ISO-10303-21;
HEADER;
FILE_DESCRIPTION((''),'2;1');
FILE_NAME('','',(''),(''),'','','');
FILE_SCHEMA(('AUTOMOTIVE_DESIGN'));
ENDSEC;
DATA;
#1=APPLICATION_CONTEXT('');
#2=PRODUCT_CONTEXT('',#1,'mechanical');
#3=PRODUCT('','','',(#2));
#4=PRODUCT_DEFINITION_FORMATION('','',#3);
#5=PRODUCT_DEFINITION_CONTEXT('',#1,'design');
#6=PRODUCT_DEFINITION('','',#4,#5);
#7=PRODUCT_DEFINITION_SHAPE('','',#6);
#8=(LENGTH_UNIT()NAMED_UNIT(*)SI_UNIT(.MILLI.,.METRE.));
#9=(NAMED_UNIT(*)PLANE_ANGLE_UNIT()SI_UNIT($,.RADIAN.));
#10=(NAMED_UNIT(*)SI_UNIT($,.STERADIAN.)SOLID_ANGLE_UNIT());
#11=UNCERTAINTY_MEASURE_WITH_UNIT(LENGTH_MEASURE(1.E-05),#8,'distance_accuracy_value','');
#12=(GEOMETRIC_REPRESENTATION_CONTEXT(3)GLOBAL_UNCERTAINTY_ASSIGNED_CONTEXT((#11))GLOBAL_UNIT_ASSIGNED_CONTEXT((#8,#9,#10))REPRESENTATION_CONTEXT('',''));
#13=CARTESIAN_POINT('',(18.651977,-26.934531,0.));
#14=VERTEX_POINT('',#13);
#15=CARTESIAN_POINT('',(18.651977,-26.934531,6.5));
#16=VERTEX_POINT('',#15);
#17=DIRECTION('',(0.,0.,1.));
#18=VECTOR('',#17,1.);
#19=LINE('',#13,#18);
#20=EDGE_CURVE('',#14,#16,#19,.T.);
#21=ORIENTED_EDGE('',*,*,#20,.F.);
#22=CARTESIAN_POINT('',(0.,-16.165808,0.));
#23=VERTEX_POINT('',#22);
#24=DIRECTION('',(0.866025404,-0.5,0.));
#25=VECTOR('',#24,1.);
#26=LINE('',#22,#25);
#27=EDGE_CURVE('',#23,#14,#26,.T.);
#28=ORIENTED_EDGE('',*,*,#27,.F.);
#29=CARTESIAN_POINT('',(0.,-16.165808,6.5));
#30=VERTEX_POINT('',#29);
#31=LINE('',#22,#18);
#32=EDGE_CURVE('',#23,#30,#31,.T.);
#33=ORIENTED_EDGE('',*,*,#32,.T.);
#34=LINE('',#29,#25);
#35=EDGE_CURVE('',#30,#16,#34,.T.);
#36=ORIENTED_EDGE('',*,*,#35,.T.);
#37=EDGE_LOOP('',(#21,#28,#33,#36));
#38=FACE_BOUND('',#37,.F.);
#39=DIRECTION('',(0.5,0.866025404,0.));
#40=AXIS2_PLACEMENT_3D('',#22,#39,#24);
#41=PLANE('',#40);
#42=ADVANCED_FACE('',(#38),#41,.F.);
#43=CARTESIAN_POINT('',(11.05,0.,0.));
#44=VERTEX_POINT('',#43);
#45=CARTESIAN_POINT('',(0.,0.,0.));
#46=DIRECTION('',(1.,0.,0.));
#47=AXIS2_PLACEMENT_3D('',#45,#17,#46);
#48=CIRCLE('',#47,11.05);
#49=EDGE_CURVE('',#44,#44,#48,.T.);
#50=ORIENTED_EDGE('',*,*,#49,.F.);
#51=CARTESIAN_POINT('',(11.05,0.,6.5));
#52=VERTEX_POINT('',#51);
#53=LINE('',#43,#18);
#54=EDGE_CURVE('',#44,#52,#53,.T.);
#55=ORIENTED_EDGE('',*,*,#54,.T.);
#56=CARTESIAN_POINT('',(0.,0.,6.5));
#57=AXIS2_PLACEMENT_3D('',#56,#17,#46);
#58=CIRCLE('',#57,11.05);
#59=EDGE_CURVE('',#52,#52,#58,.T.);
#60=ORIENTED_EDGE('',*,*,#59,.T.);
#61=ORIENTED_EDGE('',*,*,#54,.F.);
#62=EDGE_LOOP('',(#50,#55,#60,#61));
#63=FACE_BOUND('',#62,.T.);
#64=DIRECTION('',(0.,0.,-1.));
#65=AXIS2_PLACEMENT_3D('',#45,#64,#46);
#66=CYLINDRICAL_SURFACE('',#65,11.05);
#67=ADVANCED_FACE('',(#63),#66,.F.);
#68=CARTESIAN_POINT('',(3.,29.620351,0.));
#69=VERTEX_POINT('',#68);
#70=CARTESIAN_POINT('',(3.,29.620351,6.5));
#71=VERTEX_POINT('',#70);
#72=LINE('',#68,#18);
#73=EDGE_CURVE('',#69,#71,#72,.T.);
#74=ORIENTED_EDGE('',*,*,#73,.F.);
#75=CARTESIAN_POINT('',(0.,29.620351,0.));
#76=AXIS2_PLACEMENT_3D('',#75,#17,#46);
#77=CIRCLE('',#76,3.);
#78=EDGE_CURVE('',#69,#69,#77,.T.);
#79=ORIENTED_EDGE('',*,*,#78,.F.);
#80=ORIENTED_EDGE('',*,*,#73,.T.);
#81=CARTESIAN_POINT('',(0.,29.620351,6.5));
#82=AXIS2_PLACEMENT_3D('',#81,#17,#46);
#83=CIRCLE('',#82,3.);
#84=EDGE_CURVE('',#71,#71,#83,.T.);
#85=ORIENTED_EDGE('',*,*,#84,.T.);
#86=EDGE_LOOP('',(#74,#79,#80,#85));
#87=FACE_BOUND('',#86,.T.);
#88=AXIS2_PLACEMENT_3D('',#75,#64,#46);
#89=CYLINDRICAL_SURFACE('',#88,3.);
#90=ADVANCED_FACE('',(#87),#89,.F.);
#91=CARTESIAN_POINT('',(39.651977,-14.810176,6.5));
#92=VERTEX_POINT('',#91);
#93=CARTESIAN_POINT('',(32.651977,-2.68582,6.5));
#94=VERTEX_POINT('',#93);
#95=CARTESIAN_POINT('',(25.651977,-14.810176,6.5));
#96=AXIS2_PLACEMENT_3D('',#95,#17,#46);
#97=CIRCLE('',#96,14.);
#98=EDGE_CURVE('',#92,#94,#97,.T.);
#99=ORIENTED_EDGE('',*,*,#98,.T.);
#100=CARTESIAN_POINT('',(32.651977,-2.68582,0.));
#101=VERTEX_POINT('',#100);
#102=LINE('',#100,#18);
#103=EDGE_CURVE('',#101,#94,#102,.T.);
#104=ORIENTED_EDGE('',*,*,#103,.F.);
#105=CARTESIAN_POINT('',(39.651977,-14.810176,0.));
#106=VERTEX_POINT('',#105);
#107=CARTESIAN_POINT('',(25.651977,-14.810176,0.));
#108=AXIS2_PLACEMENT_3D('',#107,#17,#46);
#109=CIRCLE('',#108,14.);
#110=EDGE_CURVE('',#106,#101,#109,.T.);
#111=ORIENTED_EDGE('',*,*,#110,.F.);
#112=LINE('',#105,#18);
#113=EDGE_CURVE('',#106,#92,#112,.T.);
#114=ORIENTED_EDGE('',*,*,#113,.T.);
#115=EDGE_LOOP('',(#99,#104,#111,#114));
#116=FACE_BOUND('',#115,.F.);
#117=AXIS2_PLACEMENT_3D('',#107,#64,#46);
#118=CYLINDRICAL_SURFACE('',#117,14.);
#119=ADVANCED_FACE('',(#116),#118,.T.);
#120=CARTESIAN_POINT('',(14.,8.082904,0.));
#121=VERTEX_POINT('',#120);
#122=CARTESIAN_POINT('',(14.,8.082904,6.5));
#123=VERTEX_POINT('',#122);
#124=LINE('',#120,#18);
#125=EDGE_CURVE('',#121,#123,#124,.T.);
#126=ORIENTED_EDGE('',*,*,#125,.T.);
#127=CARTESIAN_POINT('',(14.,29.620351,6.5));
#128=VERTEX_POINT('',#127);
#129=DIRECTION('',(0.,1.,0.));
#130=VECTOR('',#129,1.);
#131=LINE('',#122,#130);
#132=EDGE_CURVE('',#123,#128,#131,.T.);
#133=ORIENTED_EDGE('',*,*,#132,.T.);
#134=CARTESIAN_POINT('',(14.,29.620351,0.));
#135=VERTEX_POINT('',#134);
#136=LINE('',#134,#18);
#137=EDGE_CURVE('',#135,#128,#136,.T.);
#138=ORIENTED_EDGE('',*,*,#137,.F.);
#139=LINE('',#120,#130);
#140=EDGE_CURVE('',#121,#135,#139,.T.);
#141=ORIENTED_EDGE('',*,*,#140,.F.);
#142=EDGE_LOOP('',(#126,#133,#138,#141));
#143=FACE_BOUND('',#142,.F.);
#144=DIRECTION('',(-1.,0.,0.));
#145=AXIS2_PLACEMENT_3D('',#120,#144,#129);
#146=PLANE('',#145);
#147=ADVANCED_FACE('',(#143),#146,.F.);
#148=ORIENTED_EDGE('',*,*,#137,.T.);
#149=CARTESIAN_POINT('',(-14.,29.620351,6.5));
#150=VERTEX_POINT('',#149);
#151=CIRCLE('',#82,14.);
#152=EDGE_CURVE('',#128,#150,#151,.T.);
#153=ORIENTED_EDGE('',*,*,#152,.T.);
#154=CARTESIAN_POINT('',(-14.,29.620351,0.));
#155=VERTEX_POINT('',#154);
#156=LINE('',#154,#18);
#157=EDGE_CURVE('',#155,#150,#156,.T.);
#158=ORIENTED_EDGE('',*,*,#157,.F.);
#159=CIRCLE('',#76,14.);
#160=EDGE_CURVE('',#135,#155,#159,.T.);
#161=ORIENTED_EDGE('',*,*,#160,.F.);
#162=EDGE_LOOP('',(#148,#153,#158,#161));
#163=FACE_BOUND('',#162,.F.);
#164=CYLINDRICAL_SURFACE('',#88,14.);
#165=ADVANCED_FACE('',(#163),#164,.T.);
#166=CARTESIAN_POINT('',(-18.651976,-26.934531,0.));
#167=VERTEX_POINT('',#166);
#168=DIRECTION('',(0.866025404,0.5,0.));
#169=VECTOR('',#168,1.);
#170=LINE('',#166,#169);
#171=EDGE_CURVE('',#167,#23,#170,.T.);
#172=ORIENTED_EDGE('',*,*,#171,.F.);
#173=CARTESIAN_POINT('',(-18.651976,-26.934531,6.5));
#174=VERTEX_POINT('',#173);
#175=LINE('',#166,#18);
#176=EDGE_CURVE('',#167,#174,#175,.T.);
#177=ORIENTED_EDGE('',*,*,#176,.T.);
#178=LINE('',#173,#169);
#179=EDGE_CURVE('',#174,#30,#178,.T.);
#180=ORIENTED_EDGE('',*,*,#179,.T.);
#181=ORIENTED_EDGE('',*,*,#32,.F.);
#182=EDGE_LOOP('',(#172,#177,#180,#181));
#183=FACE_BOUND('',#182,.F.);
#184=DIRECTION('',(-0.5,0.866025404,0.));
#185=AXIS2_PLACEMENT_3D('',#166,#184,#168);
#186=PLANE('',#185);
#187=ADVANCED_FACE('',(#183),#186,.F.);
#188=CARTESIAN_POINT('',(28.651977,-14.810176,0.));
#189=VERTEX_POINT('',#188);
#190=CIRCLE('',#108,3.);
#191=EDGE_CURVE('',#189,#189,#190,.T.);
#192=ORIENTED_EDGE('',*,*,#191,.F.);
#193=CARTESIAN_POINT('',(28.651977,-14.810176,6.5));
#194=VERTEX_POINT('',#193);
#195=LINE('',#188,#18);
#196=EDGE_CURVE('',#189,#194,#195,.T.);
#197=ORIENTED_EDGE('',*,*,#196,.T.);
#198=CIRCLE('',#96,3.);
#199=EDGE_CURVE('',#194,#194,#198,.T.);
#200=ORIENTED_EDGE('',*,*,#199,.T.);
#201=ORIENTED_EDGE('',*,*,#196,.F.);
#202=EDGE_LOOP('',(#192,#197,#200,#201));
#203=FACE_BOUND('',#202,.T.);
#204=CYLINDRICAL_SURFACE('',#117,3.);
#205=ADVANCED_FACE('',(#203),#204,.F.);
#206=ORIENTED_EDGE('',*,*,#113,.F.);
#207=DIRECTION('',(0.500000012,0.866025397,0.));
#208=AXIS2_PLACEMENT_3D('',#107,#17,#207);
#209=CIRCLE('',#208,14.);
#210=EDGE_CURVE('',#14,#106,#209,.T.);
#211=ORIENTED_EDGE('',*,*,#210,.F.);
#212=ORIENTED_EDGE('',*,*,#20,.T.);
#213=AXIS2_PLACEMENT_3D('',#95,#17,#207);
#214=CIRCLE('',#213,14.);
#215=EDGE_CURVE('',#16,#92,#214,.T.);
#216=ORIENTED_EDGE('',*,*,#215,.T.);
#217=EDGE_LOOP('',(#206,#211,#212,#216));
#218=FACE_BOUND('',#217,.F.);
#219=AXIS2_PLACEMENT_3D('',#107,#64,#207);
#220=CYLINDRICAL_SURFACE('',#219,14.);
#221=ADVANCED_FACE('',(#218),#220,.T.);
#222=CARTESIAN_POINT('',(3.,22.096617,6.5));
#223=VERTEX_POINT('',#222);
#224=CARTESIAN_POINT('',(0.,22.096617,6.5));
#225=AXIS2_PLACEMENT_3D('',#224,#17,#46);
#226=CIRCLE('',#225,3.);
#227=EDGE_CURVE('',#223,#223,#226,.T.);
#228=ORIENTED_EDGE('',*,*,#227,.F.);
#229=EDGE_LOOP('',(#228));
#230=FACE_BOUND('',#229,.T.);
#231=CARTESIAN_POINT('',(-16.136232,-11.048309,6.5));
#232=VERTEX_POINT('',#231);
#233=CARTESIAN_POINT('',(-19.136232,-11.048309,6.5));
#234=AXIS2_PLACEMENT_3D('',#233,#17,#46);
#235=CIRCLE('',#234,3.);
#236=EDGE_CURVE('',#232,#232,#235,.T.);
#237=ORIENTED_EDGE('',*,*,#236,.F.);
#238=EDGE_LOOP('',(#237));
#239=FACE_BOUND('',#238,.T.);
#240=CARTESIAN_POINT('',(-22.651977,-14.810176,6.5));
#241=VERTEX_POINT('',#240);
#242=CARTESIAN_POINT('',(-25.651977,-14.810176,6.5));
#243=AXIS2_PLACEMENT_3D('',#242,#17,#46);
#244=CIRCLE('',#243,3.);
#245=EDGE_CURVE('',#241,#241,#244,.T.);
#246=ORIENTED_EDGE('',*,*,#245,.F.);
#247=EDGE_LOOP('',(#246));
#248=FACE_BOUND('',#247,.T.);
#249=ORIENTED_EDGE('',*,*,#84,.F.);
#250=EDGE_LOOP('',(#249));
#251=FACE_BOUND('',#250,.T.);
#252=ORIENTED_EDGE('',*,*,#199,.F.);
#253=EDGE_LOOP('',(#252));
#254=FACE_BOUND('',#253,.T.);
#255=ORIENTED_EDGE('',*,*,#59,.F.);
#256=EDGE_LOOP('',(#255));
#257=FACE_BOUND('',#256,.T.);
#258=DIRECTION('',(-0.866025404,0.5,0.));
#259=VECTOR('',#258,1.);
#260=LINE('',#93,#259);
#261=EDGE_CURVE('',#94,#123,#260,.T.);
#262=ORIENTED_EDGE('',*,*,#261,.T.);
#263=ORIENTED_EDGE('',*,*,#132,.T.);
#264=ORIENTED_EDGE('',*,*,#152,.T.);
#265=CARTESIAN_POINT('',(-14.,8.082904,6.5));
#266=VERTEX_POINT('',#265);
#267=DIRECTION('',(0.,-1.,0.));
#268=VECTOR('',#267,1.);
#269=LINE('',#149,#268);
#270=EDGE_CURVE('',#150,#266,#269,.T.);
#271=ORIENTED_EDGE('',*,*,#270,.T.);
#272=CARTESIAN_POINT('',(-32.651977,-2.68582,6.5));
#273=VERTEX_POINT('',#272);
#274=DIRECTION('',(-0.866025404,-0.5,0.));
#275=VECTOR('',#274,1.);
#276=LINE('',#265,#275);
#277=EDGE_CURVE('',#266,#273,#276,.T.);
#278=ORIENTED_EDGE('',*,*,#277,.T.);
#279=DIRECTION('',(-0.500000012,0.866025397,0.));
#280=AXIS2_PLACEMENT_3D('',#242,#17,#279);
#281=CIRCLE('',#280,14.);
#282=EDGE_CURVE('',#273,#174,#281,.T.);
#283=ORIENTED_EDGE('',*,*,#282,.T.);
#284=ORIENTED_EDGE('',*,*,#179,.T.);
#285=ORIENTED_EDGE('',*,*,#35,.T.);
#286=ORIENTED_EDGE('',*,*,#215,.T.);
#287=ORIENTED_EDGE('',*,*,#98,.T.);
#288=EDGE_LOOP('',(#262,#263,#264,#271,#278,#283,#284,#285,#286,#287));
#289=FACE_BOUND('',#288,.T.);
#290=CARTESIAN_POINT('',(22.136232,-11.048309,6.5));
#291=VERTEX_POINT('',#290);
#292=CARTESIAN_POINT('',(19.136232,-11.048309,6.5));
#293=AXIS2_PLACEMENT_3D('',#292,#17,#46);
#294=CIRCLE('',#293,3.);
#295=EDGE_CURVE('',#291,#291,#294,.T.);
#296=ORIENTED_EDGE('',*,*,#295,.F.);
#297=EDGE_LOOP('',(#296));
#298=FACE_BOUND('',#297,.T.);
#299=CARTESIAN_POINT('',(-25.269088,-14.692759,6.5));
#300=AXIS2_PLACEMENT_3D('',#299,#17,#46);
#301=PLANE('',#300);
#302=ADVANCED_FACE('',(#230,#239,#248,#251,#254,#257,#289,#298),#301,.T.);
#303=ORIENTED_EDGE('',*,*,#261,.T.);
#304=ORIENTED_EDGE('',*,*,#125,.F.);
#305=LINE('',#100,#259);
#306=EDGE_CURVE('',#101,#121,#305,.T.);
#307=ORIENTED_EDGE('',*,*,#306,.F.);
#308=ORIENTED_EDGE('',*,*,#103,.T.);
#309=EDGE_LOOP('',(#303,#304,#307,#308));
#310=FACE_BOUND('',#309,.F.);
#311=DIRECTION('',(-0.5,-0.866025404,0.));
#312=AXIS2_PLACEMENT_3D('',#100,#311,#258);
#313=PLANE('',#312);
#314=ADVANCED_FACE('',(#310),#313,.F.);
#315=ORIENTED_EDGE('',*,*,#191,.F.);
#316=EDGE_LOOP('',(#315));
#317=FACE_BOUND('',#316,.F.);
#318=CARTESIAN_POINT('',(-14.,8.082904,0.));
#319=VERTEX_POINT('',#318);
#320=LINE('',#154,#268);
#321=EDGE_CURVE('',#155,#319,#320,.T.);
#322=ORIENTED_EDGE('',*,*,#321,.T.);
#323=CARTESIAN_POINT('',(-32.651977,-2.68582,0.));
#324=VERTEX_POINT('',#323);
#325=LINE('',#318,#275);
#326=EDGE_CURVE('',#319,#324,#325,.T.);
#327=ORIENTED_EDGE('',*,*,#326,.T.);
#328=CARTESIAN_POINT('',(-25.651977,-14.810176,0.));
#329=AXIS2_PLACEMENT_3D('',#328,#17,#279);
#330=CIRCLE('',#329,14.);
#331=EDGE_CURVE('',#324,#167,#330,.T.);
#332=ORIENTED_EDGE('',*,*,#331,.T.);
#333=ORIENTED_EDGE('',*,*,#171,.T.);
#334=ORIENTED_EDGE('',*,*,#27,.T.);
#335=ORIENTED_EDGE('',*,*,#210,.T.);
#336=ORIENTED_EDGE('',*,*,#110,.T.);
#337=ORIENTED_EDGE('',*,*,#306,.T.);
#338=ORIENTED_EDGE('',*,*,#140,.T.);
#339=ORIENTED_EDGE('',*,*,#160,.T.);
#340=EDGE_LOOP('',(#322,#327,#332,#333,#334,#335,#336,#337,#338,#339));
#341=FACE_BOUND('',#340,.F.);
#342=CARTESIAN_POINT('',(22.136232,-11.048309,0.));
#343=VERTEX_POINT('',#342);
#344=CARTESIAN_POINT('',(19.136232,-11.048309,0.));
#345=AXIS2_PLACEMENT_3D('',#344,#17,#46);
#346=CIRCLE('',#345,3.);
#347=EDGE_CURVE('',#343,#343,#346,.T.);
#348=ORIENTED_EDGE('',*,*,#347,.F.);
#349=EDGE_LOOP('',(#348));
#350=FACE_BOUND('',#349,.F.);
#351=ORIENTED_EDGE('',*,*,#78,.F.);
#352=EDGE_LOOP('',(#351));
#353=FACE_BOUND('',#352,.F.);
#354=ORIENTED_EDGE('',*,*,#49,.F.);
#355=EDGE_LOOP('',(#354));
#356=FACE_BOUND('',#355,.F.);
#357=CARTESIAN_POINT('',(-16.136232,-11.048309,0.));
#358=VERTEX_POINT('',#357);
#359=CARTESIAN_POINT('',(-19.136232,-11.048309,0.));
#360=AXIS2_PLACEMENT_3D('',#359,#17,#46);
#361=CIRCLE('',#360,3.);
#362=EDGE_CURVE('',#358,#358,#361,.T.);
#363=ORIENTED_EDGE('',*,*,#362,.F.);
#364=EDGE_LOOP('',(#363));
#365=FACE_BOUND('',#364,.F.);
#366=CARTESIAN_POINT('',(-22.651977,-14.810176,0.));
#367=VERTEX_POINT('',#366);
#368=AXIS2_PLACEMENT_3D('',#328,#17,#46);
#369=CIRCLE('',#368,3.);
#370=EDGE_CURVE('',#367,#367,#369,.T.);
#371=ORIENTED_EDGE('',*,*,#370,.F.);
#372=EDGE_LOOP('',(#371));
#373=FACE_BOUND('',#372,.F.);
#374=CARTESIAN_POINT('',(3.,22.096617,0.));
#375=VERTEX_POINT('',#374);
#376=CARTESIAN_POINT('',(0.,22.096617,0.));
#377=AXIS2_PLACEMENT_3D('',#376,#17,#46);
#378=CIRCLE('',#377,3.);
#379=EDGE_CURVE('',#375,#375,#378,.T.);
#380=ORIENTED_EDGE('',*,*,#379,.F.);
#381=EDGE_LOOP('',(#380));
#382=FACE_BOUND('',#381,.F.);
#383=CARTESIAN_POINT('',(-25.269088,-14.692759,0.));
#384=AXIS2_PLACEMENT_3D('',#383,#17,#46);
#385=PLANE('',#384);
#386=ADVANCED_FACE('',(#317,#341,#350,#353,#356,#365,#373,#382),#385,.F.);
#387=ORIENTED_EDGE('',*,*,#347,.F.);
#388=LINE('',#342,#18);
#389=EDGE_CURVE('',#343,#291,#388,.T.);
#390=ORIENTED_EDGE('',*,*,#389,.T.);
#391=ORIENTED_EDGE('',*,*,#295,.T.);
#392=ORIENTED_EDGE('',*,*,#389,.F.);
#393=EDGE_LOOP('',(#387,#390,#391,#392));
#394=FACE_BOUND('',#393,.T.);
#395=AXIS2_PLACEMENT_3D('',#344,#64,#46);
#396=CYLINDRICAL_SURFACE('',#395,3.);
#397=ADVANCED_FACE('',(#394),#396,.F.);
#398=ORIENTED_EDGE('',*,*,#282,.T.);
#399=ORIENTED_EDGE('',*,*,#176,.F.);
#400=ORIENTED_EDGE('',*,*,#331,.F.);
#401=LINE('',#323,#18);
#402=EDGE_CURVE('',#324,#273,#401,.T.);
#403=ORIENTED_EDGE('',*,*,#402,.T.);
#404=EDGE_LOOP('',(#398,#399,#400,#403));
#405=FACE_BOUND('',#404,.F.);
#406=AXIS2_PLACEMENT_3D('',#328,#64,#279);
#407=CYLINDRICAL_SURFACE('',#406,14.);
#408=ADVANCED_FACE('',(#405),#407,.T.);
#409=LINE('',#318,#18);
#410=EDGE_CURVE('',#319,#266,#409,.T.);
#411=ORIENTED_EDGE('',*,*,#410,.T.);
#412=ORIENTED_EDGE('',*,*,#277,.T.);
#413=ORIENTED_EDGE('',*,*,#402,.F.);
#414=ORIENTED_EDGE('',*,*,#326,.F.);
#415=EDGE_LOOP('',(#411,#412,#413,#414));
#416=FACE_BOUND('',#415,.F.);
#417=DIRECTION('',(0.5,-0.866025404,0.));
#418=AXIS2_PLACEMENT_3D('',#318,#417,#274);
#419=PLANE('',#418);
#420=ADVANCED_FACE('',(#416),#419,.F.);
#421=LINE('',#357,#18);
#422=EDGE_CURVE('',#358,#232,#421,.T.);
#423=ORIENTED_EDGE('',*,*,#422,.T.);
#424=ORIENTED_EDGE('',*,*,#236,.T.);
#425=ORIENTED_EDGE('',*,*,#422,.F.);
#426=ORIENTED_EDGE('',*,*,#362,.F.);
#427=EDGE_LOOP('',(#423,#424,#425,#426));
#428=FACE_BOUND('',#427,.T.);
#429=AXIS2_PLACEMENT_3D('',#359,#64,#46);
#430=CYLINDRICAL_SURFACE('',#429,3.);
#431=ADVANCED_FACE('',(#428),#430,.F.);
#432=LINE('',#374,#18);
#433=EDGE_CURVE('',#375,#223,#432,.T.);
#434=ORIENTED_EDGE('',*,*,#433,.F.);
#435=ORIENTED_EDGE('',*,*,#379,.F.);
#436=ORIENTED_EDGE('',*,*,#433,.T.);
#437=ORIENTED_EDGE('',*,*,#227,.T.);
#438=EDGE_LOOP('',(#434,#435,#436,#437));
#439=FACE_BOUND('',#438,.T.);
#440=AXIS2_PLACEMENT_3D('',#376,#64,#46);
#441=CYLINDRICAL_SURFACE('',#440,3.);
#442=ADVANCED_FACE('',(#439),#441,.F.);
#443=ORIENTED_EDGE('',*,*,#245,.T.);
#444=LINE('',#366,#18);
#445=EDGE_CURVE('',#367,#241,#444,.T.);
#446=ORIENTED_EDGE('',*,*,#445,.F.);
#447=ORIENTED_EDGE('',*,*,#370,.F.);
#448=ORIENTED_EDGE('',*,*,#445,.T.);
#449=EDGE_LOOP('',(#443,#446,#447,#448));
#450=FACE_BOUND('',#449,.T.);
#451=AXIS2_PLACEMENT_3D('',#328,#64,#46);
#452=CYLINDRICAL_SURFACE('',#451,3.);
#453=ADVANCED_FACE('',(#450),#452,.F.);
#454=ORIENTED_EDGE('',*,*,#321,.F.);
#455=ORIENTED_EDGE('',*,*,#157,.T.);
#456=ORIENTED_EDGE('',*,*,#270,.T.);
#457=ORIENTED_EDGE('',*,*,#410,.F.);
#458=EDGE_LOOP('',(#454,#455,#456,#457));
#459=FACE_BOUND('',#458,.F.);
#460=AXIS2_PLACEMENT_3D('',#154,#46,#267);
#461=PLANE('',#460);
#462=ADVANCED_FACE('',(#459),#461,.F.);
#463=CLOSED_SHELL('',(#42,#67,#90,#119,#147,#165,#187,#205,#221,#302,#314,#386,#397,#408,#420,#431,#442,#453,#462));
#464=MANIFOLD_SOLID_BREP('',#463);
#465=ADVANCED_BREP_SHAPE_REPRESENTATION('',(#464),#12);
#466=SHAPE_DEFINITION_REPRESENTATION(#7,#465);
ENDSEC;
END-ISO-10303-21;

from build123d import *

# Parameters (mm, degrees)
F0_R     = 3
F0_R_2   = 11.05
F1_DEPTH = 6.5


with BuildPart() as f1:
    # F0 (on Top) → F1 (new body)
    with BuildSketch(Plane.XY):
        with BuildLine():
            ThreePointArc((-32.6519768305, -2.6858200754), (-37.7763321694, -21.8101758986), (-18.6519763031, -26.9345310768))
            ThreePointArc((-18.6519763031, -26.9345310768), (-13.5276209102, -21.8101754521), (-11.6519766687, -14.8101756349))
            ThreePointArc((-11.6519766687, -14.8101756349), (-18.6519767496, -2.6858199352), (-32.6519768305, -2.6858200754))
        make_face()
        with Locations((-25.6519766687, -14.8101756349)):
            Circle(F0_R, mode=Mode.SUBTRACT)
        with Locations((-19.1362317873, -11.0483085737)):
            Circle(F0_R, mode=Mode.SUBTRACT)
        with BuildLine():
            Line((0, -16.1658075373), (-7, -12.124355653))
            ThreePointArc((-7, -12.124355653), (-12.124355653, -7), (-14, 0))
            Line((-14, 0), (-14, 8.0829037687))
            Line((-14, 8.0829037687), (-32.6519768305, -2.6858200754))
            ThreePointArc((-32.6519768305, -2.6858200754), (-18.6519767496, -2.6858199352), (-11.6519766687, -14.8101756349))
            ThreePointArc((-11.6519766687, -14.8101756349), (-13.5276209102, -21.8101754521), (-18.6519763031, -26.9345310768))
            Line((-18.6519763031, -26.9345310768), (0, -16.1658075373))
        make_face()
        with BuildLine():
            Line((0, -16.1658075373), (7, -12.124355653))
            ThreePointArc((7, -12.124355653), (0, -14), (-7, -12.124355653))
            Line((-7, -12.124355653), (0, -16.1658075373))
        make_face()
        with BuildLine():
            ThreePointArc((39.6519766687, -14.8101756349), (37.7763323684, -7.8101757158), (32.6519768305, -2.6858200754))
            ThreePointArc((32.6519768305, -2.6858200754), (13.5276209927, -7.8101756747), (18.6519769101, -26.9345314273))
            ThreePointArc((18.6519769101, -26.9345314273), (32.6519767894, -26.9345312182), (39.6519766687, -14.8101756349))
        make_face()
        with Locations((19.1362317873, -11.0483085737)):
            Circle(F0_R, mode=Mode.SUBTRACT)
        with Locations((25.6519766687, -14.8101756349)):
            Circle(F0_R, mode=Mode.SUBTRACT)
        with BuildLine():
            Line((14, 8.0829037687), (14, 0))
            ThreePointArc((14, 0), (12.124355653, -7), (7, -12.124355653))
            Line((7, -12.124355653), (0, -16.1658075373))
            Line((0, -16.1658075373), (18.6519769101, -26.9345314273))
            ThreePointArc((18.6519769101, -26.9345314273), (13.5276209927, -7.8101756747), (32.6519768305, -2.6858200754))
            Line((32.6519768305, -2.6858200754), (14, 8.0829037687))
        make_face()
        with BuildLine():
            ThreePointArc((-14, 29.6203512698), (0, 15.6203512698), (14, 29.6203512698))
            ThreePointArc((14, 29.6203512698), (0, 43.6203512698), (-14, 29.6203512698))
        make_face()
        with Locations((0, 22.0966171473)):
            Circle(F0_R, mode=Mode.SUBTRACT)
        with Locations((0, 29.6203512698)):
            Circle(F0_R, mode=Mode.SUBTRACT)
        with BuildLine():
            ThreePointArc((-7, 12.124355653), (0, 14), (7, 12.124355653))
            Line((7, 12.124355653), (14, 8.0829037687))
            Line((14, 8.0829037687), (14, 29.6203512698))
            ThreePointArc((14, 29.6203512698), (0, 15.6203512698), (-14, 29.6203512698))
            Line((-14, 29.6203512698), (-14, 8.0829037687))
            Line((-14, 8.0829037687), (-7, 12.124355653))
        make_face()
        with BuildLine():
            ThreePointArc((-14, 0), (-12.124355653, 7), (-7, 12.124355653))
            Line((-7, 12.124355653), (-14, 8.0829037687))
            Line((-14, 8.0829037687), (-14, 0))
        make_face()
        with BuildLine():
            ThreePointArc((7, -12.124355653), (12.124355653, -7), (14, 0))
            ThreePointArc((14, 0), (12.124355653, 7), (7, 12.124355653))
            ThreePointArc((7, 12.124355653), (0, 14), (-7, 12.124355653))
            ThreePointArc((-7, 12.124355653), (-12.124355653, 7), (-14, 0))
            ThreePointArc((-14, 0), (-12.124355653, -7), (-7, -12.124355653))
            ThreePointArc((-7, -12.124355653), (0, -14), (7, -12.124355653))
        make_face()
        Circle(F0_R_2, mode=Mode.SUBTRACT)
        with BuildLine():
            ThreePointArc((7, 12.124355653), (12.124355653, 7), (14, 0))
            Line((14, 0), (14, 8.0829037687))
            Line((14, 8.0829037687), (7, 12.124355653))
        make_face()
    extrude(amount=F1_DEPTH)


solid = f1.part
